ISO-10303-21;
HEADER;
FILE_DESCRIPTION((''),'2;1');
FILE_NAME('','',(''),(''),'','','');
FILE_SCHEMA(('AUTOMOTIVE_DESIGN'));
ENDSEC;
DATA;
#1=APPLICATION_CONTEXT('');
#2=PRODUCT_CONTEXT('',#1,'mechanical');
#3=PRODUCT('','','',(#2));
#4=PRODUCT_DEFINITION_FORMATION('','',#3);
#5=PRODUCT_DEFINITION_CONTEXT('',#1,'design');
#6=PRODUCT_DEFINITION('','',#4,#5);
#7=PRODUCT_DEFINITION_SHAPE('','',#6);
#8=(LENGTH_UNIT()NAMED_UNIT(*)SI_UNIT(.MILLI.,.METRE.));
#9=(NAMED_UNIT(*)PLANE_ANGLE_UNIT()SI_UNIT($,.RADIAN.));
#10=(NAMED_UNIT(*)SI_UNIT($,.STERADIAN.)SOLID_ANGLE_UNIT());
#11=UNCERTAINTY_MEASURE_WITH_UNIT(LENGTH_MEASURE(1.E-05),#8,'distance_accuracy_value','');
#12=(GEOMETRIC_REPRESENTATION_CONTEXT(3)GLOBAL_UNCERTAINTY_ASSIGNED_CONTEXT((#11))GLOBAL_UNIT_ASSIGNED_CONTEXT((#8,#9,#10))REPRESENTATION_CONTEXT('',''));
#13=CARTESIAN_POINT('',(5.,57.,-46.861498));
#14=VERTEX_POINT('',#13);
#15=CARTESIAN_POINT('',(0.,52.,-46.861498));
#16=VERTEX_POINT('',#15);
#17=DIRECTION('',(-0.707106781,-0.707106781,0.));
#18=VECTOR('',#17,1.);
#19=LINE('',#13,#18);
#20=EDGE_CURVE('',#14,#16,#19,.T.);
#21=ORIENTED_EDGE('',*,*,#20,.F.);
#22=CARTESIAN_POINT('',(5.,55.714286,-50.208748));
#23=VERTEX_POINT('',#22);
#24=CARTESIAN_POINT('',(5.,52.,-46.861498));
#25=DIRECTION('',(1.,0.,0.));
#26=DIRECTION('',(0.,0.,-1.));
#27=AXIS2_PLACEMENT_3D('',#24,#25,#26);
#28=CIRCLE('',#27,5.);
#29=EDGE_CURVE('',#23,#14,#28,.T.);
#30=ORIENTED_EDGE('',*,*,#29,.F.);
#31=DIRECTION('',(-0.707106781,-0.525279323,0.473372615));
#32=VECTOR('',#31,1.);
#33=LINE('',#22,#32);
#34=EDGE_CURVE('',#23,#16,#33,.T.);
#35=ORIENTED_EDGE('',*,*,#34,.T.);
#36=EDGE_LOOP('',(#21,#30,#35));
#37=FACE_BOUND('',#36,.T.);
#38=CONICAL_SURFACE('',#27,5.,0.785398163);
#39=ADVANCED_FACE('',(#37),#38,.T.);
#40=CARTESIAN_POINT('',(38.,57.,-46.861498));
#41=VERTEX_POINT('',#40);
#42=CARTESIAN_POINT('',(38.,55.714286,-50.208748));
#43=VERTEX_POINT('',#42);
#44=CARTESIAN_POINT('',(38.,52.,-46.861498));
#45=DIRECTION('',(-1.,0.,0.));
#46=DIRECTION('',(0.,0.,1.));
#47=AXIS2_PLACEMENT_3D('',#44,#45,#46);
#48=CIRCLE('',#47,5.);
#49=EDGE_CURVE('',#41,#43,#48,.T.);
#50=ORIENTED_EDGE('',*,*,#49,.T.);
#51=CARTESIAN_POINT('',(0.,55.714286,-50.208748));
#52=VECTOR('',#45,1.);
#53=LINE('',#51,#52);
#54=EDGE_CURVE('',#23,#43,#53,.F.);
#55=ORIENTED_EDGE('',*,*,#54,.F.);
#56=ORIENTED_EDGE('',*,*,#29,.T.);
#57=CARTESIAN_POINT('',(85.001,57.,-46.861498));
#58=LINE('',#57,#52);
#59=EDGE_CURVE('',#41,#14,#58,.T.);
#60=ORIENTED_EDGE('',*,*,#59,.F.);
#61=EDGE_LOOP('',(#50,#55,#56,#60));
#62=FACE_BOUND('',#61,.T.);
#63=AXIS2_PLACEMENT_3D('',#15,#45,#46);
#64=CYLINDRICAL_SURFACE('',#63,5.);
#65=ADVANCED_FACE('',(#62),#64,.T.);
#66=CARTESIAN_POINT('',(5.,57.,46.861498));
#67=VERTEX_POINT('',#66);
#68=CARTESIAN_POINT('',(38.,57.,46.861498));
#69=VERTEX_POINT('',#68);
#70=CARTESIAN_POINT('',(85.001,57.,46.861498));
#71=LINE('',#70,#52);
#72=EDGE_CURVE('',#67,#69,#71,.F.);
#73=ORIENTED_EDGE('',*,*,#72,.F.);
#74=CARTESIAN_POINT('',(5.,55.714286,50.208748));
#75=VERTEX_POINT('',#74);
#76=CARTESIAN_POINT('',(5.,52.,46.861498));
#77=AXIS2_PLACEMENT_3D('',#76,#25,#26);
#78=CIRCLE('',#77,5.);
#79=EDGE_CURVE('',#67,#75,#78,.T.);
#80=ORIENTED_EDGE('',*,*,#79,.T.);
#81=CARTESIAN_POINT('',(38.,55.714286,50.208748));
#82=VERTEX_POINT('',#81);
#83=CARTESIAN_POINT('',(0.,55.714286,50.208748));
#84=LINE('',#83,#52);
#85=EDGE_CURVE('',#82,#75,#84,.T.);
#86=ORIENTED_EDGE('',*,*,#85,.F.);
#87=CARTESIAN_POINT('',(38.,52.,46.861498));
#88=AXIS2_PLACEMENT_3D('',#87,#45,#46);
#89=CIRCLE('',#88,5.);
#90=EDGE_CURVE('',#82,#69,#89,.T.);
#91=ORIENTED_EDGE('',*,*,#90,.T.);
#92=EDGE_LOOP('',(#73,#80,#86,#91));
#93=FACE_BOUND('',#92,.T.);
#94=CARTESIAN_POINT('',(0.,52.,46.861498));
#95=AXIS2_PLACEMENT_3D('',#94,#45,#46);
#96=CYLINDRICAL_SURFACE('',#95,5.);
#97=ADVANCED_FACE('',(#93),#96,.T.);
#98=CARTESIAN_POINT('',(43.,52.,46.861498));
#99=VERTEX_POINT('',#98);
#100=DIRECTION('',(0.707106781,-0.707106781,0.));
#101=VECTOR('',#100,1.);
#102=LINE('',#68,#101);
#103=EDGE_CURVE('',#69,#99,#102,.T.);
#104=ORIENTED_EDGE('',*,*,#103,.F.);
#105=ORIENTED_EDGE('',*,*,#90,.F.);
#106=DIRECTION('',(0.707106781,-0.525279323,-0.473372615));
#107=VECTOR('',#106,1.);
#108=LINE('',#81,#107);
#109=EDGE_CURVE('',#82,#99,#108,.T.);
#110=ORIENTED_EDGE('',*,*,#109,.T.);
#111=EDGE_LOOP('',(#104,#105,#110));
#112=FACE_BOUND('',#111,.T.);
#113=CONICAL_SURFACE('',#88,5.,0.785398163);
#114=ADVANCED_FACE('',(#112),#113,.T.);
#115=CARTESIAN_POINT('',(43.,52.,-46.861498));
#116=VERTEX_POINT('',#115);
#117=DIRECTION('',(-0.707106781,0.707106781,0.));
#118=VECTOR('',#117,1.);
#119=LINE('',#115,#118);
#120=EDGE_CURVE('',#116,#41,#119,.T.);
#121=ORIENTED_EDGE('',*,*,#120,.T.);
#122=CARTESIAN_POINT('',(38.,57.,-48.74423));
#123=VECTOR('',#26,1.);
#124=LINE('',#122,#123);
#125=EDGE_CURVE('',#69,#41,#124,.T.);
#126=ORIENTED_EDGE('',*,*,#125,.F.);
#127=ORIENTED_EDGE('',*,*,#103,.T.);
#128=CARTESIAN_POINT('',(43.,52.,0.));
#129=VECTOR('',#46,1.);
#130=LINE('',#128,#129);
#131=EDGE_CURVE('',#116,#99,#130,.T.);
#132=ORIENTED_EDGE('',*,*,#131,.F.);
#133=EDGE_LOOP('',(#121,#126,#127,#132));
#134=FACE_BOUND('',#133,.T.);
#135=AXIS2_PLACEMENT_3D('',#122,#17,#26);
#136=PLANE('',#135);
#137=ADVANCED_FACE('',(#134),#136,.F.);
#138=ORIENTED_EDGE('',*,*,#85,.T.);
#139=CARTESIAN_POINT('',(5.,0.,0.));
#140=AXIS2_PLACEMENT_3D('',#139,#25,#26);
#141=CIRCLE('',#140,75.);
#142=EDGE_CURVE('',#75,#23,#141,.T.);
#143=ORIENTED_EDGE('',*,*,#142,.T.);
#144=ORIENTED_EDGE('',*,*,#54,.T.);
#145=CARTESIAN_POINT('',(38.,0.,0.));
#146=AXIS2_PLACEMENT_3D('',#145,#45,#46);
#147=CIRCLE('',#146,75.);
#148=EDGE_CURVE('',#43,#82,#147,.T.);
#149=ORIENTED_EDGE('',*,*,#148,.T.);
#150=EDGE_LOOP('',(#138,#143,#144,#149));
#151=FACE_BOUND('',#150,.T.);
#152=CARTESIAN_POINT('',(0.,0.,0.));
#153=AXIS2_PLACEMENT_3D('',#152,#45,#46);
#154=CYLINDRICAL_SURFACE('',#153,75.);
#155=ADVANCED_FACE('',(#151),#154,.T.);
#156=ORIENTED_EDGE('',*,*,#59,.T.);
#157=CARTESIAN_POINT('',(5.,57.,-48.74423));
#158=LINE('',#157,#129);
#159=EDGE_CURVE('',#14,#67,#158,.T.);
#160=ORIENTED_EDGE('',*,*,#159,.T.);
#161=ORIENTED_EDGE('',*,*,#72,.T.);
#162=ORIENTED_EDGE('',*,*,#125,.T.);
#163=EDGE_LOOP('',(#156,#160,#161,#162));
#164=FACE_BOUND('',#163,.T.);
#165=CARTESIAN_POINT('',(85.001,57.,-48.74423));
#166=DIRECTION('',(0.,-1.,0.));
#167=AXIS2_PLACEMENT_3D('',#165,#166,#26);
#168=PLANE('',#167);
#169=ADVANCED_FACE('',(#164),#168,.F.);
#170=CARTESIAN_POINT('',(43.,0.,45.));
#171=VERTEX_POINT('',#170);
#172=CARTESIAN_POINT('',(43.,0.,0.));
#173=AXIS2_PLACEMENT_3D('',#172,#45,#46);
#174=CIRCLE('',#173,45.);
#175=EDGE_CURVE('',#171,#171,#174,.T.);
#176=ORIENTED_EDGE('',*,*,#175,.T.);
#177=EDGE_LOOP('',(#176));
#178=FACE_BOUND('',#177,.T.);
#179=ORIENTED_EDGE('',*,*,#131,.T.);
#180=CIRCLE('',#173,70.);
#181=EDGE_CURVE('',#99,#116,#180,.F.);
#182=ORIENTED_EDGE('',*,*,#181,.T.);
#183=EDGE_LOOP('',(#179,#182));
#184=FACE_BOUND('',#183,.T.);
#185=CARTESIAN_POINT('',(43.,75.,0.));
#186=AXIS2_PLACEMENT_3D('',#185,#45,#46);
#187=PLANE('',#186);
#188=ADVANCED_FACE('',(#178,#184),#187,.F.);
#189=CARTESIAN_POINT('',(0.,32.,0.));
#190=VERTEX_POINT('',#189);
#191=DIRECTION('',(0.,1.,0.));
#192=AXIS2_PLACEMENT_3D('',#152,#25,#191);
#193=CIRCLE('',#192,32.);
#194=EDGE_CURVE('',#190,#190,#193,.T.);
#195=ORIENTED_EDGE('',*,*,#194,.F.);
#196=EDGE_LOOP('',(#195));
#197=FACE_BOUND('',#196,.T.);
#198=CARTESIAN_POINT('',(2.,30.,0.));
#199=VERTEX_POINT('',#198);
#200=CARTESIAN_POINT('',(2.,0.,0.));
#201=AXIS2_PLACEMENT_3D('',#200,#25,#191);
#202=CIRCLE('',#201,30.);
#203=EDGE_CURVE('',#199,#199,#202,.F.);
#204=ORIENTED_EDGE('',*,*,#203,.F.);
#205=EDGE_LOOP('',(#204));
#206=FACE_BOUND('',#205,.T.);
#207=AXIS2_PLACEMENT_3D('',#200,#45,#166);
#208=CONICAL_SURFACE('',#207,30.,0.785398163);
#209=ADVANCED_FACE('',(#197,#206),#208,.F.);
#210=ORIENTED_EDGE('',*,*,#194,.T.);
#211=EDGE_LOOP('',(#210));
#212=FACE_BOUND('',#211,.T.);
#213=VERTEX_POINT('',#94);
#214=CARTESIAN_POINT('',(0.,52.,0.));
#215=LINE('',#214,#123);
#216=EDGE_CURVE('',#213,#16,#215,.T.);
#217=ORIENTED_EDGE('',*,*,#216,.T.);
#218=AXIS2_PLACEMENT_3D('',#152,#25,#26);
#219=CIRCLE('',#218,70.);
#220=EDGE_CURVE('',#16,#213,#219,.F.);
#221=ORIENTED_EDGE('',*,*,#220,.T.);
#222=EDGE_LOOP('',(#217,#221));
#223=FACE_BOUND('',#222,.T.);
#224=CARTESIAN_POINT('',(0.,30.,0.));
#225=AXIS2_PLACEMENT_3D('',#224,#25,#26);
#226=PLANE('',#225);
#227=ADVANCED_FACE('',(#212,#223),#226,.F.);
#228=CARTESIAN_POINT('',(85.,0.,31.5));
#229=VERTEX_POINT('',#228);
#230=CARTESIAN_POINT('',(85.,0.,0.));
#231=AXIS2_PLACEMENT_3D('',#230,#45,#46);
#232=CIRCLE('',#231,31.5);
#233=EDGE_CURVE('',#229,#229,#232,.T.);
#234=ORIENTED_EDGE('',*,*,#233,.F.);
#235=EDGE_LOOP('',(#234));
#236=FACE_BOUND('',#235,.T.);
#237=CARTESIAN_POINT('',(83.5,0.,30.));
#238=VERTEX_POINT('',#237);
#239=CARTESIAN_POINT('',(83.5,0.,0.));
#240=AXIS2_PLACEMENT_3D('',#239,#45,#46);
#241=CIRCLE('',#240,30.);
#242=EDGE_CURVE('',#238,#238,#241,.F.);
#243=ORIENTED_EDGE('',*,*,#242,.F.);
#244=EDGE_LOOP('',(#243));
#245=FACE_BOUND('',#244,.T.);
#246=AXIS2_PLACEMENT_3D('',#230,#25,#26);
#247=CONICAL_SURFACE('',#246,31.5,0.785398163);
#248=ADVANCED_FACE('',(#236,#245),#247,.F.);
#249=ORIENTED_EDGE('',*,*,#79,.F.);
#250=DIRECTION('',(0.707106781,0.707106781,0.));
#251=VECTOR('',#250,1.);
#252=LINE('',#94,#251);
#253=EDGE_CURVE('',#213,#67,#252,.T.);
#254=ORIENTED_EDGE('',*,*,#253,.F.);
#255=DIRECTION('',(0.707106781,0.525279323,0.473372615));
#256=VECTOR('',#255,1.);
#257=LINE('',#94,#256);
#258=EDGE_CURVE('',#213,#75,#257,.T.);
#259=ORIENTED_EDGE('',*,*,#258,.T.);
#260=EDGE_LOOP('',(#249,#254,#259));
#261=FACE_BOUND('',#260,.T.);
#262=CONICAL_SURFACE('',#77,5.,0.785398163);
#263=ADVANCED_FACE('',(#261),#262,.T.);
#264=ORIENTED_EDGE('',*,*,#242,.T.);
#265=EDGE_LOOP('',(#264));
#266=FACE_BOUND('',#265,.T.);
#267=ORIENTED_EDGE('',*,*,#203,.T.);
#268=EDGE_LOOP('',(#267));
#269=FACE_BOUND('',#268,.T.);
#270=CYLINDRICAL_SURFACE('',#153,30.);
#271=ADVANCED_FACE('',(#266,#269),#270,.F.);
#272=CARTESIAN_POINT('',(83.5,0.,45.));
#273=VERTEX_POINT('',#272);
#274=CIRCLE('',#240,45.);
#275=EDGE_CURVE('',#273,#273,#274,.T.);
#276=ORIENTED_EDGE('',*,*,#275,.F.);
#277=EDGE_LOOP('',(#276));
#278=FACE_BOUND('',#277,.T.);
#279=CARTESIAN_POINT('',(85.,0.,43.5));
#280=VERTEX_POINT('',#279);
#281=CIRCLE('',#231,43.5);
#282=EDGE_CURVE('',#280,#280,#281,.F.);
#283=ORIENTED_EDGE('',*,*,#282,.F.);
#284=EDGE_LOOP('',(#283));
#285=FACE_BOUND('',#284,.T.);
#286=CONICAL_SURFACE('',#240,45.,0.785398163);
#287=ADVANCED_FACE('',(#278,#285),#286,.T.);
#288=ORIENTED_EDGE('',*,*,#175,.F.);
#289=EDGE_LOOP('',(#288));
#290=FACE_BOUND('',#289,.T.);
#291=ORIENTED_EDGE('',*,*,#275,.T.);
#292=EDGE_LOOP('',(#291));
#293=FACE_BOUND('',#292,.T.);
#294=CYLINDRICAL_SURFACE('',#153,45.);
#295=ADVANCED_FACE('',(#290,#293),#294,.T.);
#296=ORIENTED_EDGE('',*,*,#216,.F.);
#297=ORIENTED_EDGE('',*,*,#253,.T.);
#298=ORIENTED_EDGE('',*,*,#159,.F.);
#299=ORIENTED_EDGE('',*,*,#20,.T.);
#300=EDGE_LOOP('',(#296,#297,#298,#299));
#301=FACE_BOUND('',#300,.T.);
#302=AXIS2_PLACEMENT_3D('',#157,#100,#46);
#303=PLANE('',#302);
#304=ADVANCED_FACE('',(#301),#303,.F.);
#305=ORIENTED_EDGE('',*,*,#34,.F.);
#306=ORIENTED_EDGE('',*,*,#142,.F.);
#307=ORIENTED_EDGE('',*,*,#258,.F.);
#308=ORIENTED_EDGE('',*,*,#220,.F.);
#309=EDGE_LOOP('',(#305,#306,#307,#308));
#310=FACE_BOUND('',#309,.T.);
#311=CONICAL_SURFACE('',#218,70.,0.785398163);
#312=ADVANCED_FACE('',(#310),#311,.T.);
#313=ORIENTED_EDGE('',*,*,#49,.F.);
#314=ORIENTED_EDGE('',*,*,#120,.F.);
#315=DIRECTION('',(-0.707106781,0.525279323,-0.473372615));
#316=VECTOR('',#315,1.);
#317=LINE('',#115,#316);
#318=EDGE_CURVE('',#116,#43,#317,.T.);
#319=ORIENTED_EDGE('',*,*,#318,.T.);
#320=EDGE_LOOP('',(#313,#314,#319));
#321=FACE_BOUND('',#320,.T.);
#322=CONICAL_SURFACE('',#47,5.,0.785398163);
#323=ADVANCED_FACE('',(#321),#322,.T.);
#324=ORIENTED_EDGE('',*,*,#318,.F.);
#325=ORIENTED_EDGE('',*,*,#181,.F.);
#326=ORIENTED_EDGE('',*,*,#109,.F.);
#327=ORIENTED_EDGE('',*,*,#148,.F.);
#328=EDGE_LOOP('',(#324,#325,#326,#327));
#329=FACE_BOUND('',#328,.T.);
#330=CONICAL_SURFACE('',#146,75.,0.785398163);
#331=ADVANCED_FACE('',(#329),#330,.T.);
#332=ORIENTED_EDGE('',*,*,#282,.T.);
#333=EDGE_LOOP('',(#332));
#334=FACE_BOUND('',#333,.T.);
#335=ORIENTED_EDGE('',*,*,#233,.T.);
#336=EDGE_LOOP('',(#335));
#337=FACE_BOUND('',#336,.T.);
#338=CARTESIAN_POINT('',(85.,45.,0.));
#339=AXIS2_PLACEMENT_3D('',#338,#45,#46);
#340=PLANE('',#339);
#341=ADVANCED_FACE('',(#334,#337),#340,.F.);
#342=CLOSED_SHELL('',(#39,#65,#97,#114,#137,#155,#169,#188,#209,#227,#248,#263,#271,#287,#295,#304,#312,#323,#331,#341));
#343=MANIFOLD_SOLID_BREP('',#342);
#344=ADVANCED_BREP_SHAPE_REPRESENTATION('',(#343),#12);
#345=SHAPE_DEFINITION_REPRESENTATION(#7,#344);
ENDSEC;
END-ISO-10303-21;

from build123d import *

# Parameters (mm, degrees)
CUT_EXTRUDE_1_REACH = 137.923
CHAMFER_2_SIZE      = 1.5
FILLET_1_R          = 5
CHAMFER_3_SIZE      = 5
CHAMFER_4_SIZE      = 2


with BuildPart() as part:
    # 草图1 → 旋转1 (revolve)
    with BuildSketch(Plane.XY, mode=Mode.PRIVATE) as revolve_1_sk:
        Polygon((0, 30), (0, 75), (43, 75), (43, 45), (85, 45), (85, 30), align=None)
    revolve(revolve_1_sk.sketch.rotate(Axis((0, 0, 0), (1, 0, 0)), 90), axis=Axis((0, 0, 0), (1, 0, 0)))

    # 草图3 → 切除-拉伸1 (cut, up to next)
    with BuildSketch(Plane.ZY, mode=Mode.PRIVATE) as cut_extrude_1_sk1:
        with BuildLine():
            Line((-48.744230428, 57), (48.744230428, 57))
            ThreePointArc((48.744230428, 57), (0, 75), (-48.744230428, 57))
        make_face()
    cut_extrude_1_tool1 = extrude(cut_extrude_1_sk1.sketch, amount=-CUT_EXTRUDE_1_REACH, mode=Mode.PRIVATE) & part.part
    add(cut_extrude_1_tool1.solids().sort_by_distance((0, 64.279608, 0))[0], mode=Mode.SUBTRACT)

    # 倒角2
    chamfer_2_edges = [part.edges().sort_by_distance(p)[0] for p in [
        (85, 0, -30),
        (85, 0, -45),
    ]]
    chamfer(chamfer_2_edges, length=CHAMFER_2_SIZE)

    # 圆角1
    fillet_1_edges = [part.edges().sort_by_distance(p)[0] for p in [
        (21.5, 57, -48.744230428),
        (21.5, 57, 48.744230428),
    ]]
    fillet(fillet_1_edges, radius=FILLET_1_R)

    # 倒角3
    chamfer_3_edges = [part.edges().sort_by_distance(p)[0] for p in [
        (43, -75, 0),
        (0, -75, 0),
        (0, 57, 0),
        (0, 56.667516929, -48.654340969),
        (0, 56.667516929, 48.654340969),
        (43, 57, 0),
        (43, 56.667516929, -48.654340969),
        (43, 56.667516929, 48.654340969),
    ]]
    chamfer(chamfer_3_edges, length=CHAMFER_3_SIZE - 0.0001)  # a hair under: the kernel refuses the full size

    # 倒角4
    chamfer_4_edges = [part.edges().sort_by_distance(p)[0] for p in [
        (0, 0, -30),
    ]]
    chamfer(chamfer_4_edges, length=CHAMFER_4_SIZE)


solid = part.part
